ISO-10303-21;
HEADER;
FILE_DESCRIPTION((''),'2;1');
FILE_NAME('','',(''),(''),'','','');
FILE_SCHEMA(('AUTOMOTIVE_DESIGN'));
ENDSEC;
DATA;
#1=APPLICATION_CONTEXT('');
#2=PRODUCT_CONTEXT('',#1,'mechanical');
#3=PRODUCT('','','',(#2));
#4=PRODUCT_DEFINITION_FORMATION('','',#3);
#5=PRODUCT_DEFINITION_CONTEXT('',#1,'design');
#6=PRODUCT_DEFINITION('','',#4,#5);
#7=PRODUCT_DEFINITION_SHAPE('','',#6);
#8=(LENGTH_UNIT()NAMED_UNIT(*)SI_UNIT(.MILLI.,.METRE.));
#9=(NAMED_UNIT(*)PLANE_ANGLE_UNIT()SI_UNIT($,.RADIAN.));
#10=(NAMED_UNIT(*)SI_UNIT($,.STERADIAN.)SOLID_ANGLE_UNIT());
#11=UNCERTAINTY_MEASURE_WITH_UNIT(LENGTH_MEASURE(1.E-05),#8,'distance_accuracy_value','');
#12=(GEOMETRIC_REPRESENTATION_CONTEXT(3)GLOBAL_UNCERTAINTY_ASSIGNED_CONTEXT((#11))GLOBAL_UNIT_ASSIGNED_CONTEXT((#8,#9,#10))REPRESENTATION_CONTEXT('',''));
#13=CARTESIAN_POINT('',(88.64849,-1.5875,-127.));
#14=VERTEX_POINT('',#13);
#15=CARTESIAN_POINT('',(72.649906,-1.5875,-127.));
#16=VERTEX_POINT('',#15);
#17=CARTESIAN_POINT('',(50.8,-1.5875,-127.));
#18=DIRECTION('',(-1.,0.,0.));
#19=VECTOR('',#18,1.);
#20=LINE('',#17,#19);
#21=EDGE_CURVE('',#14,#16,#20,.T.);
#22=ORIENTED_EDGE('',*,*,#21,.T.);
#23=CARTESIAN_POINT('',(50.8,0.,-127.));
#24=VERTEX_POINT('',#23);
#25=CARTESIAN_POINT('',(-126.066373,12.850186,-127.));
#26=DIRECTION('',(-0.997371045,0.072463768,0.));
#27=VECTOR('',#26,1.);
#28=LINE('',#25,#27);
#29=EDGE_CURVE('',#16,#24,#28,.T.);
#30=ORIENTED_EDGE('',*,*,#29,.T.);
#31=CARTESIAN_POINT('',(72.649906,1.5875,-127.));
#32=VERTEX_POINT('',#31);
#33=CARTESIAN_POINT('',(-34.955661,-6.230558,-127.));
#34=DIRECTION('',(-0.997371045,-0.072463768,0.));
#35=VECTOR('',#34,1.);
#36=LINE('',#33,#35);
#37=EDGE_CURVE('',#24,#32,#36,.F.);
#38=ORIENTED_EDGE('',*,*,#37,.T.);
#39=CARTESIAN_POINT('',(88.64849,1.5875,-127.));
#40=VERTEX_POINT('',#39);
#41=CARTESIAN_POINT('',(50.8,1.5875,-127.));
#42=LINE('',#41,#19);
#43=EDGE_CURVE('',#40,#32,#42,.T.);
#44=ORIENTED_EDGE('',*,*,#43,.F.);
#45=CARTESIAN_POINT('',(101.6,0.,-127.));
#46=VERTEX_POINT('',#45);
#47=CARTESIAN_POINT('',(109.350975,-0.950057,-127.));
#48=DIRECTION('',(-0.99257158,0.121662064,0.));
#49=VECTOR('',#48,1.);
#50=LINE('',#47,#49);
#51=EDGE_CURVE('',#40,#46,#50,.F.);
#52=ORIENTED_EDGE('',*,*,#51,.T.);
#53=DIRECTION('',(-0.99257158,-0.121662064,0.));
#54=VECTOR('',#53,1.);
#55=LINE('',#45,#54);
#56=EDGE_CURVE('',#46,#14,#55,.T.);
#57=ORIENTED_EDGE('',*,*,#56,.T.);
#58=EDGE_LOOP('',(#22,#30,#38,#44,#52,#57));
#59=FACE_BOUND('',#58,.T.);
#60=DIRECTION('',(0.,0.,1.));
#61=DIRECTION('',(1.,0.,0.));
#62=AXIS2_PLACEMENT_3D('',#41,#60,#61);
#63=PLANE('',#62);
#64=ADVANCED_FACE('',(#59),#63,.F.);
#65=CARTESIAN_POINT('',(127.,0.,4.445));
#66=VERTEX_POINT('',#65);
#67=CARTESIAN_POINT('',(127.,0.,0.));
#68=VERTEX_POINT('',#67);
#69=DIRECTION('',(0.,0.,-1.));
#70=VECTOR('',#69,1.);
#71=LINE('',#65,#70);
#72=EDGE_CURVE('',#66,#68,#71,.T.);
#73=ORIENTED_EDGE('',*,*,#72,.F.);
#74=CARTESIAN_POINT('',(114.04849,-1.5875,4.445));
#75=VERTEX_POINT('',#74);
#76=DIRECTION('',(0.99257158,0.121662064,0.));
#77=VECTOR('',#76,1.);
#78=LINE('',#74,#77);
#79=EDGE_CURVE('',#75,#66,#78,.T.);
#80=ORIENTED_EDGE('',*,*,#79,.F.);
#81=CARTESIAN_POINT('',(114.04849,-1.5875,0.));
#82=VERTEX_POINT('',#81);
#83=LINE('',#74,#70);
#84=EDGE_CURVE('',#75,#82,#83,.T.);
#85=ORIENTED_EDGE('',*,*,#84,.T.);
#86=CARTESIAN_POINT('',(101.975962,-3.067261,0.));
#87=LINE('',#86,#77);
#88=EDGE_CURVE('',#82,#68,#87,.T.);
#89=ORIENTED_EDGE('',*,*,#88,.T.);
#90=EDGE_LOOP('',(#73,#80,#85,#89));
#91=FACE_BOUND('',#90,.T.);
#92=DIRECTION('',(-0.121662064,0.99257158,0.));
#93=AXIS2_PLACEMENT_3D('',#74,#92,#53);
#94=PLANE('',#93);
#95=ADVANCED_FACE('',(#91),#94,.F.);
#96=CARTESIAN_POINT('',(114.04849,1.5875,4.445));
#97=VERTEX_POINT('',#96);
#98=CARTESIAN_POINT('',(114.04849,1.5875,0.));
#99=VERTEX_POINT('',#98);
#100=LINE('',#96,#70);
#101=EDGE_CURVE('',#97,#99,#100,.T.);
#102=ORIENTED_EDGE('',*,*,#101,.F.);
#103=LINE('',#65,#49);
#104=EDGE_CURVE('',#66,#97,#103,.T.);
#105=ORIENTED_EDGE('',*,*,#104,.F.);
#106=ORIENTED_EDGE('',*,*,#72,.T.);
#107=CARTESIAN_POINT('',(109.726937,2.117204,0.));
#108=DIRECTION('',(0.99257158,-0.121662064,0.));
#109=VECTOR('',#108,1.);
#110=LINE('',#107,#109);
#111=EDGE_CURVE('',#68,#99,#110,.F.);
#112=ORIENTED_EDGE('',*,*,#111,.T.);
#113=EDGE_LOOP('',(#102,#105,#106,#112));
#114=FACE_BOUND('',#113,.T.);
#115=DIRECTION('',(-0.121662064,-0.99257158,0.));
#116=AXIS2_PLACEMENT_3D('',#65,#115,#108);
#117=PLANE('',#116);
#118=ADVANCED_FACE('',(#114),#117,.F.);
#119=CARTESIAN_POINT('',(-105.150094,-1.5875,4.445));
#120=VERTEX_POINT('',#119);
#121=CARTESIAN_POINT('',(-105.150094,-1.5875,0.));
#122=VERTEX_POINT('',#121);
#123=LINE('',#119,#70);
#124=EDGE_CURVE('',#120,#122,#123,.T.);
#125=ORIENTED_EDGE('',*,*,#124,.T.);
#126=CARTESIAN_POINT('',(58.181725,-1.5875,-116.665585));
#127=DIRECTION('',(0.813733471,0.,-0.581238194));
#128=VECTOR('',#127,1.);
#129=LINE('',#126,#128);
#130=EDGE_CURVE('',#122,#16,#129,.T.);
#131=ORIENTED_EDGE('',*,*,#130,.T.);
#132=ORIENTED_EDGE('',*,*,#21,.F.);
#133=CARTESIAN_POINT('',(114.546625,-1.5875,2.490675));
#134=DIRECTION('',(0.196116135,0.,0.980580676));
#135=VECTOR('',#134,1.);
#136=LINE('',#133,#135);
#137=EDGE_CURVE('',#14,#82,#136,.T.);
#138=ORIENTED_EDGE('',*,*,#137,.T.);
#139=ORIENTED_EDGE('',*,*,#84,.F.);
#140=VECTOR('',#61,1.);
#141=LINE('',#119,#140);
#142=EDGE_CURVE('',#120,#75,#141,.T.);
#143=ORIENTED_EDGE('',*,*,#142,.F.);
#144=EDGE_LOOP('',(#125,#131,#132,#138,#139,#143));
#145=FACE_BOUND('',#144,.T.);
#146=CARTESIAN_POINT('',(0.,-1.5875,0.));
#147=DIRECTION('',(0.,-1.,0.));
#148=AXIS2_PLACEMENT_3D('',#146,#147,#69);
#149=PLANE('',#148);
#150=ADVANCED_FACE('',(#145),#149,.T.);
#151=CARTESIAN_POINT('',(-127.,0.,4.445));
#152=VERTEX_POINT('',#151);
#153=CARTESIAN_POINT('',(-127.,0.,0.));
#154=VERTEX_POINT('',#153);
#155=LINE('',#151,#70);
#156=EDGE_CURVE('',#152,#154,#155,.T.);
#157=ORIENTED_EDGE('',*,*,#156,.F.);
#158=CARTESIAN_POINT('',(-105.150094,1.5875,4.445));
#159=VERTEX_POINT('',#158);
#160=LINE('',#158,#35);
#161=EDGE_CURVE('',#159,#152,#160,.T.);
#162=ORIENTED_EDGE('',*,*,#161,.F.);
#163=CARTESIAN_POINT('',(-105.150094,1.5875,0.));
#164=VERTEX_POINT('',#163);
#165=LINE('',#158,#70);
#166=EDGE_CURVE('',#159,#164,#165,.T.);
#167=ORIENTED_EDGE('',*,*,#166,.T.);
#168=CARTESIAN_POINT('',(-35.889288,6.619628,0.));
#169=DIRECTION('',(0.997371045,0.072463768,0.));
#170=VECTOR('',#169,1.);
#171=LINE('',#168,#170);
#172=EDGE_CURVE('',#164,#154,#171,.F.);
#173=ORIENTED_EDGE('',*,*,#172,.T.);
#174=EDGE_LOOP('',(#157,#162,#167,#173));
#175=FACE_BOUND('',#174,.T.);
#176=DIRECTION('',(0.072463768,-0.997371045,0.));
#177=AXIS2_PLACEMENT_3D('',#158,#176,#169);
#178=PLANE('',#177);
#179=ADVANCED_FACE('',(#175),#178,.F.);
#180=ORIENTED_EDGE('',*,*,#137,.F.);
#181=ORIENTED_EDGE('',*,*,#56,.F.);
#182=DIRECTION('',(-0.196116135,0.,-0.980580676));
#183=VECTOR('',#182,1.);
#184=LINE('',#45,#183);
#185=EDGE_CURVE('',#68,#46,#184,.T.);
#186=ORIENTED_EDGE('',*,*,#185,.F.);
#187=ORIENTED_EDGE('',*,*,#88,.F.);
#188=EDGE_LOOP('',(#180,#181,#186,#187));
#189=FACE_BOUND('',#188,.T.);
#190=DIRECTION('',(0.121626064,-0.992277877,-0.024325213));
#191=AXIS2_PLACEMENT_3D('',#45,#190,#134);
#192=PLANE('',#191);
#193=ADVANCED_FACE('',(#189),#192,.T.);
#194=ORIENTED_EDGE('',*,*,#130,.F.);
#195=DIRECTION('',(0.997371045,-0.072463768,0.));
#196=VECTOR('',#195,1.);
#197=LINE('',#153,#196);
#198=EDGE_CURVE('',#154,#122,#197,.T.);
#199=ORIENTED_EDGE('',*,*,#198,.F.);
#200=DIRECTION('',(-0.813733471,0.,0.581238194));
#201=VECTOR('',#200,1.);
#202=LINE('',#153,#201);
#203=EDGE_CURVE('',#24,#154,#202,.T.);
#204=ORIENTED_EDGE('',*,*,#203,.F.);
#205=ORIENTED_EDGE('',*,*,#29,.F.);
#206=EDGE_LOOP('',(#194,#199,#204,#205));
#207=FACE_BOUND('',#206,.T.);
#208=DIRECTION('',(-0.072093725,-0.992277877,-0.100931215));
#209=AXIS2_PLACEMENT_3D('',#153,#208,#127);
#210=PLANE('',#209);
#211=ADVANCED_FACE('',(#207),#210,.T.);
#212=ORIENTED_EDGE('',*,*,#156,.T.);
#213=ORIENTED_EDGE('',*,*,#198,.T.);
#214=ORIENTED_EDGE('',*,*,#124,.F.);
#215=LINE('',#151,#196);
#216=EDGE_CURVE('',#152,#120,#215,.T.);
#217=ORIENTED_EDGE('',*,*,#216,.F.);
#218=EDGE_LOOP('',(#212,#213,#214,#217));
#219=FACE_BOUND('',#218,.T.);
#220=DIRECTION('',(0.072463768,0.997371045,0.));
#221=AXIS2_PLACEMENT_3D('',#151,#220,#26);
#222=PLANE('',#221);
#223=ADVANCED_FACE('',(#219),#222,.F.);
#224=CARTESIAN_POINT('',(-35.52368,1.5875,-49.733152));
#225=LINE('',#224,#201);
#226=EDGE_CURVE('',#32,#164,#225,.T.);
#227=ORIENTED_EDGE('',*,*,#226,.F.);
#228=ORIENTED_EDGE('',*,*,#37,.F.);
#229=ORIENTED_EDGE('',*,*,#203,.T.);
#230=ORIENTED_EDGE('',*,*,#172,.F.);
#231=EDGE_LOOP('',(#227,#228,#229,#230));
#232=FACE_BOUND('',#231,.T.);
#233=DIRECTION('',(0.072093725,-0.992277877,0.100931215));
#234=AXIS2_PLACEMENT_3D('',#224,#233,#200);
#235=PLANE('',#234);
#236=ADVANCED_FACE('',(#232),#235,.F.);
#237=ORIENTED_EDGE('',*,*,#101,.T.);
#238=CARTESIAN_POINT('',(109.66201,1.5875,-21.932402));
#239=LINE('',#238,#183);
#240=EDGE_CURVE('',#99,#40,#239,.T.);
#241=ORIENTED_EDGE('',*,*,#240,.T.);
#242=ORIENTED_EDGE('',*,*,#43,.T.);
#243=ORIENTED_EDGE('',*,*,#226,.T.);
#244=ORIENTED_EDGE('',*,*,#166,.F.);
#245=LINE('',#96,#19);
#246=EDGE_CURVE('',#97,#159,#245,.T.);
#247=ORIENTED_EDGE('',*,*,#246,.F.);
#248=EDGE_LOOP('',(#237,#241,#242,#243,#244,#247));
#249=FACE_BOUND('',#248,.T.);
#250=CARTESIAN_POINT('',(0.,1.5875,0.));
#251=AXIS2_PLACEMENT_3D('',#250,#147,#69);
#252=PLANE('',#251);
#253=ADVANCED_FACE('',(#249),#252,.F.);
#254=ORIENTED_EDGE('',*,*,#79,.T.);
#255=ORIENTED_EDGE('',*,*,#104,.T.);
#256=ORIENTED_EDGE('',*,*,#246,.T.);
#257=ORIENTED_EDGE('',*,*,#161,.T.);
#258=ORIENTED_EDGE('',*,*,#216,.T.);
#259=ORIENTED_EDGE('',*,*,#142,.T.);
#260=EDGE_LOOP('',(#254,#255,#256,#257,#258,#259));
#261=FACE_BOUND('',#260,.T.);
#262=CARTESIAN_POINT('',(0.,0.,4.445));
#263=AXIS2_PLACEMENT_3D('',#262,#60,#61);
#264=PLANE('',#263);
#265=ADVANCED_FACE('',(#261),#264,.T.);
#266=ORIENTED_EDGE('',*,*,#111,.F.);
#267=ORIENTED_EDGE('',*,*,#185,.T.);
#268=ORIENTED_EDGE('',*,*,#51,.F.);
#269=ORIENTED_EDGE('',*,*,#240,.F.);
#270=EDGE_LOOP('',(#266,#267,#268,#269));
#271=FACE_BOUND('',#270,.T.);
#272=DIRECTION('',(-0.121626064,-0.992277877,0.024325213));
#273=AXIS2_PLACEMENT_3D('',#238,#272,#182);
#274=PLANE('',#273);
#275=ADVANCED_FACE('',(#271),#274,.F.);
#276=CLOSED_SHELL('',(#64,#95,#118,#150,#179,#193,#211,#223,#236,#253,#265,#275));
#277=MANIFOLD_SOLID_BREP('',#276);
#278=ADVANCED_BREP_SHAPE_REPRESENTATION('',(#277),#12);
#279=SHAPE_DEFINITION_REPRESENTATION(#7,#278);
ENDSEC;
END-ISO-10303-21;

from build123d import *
from OCP.BRepFilletAPI import BRepFilletAPI_MakeChamfer

# Parameters (mm, degrees)
BOSS_EXTRUDE1_DEPTH = 1.5875
CHAMFER1_SIZE       = 1.5875
CHAMFER1_SIZE_2     = 12.7
CHAMFER2_SIZE       = 12.7
CHAMFER2_SIZE_2     = 1.5875
BOSS_EXTRUDE3_DEPTH = 4.445


# Some blends are built 0.0001 mm under size
with BuildPart() as part:
    # Sketch1 → Boss-Extrude1 (new, symmetric)
    with BuildSketch(Plane(origin=(0, 0, 0), x_dir=(1, 0, 0), z_dir=(0, 1, 0))):
        Polygon((-127, 0), (127, 0), (101.6, 127), (50.8, 127), align=None)
    extrude(amount=BOSS_EXTRUDE1_DEPTH, both=True)

    # Chamfer1
    # the kernel refuses this chamfer: 12.7, 1.5875 mm, written as the material it takes off along each edge
    with BuildSketch(Plane(origin=(77.661804698, 1.5875, -146.187003355), x_dir=(-0.1697730315694904, -0.9563912737708591, -0.2376822441972865), z_dir=(-0.8137334712067349, 0, 0.5812381937190965))) as chamfer1_piece_1:
        Polygon((CHAMFER1_SIZE * 0.956391273771, CHAMFER1_SIZE * 0.292088567827), (-CHAMFER1_SIZE_2 * 0.292088567827, CHAMFER1_SIZE_2 * 0.956391273771), (0, 0), align=None)
    extrude(amount=284.520199288, mode=Mode.SUBTRACT)
    with BuildSketch(Plane(origin=(77.661804698, -1.5875, -146.187003355), x_dir=(-0.1697730315694904, 0.9563912737708591, -0.2376822441972865), z_dir=(-0.8137334712067349, 0, 0.5812381937190965))) as chamfer1_piece_2:
        Polygon((CHAMFER1_SIZE * 0.956391273771, -CHAMFER1_SIZE * 0.292088567827), (-CHAMFER1_SIZE_2 * 0.292088567827, -CHAMFER1_SIZE_2 * 0.956391273771), (0, 0), align=None)
    extrude(amount=284.520199288, mode=Mode.SUBTRACT)

    # Chamfer2
    chamfer2_edges_1 = [part.edges().sort_by_distance(p)[0] for p in [
        (114.3, 1.5875, -63.5),
    ]]
    chamfer2_side_1 = [part.faces().sort_by_distance(p)[0] for p in [
        (114.268866564, 1.5875, -63.493773313),
    ]]
    chamfer2_edges_2 = [part.edges().sort_by_distance(p)[0] for p in [
        (114.3, -1.5875, -63.5),
    ]]
    chamfer2_side_2 = [part.faces().sort_by_distance(p)[0] for p in [
        (114.3, -1.55575, -63.5),
    ]]
    chamfer2 = BRepFilletAPI_MakeChamfer(part.part.solid().wrapped)
    for e in chamfer2_edges_1:
        chamfer2.Add(CHAMFER2_SIZE - 0.0001, CHAMFER2_SIZE_2 - 0.0001, e.wrapped, chamfer2_side_1[0].wrapped)
    for e in chamfer2_edges_2:
        chamfer2.Add(CHAMFER2_SIZE_2 - 0.0001, CHAMFER2_SIZE - 0.0001, e.wrapped, chamfer2_side_2[0].wrapped)
    add(Compound.cast(chamfer2.Shape()), mode=Mode.REPLACE)  # a hair under: the kernel refuses the full size

    # Sketch2 → Boss-Extrude3 (add)
    with BuildSketch(Plane.XY):
        Polygon((114.048490435, -1.5875), (127, 0), (114.048490435, 1.5875), (-105.150093822, 1.5875), (-127, 0), (-105.150093822, -1.5875), align=None)
    extrude(amount=BOSS_EXTRUDE3_DEPTH)


solid = part.part
